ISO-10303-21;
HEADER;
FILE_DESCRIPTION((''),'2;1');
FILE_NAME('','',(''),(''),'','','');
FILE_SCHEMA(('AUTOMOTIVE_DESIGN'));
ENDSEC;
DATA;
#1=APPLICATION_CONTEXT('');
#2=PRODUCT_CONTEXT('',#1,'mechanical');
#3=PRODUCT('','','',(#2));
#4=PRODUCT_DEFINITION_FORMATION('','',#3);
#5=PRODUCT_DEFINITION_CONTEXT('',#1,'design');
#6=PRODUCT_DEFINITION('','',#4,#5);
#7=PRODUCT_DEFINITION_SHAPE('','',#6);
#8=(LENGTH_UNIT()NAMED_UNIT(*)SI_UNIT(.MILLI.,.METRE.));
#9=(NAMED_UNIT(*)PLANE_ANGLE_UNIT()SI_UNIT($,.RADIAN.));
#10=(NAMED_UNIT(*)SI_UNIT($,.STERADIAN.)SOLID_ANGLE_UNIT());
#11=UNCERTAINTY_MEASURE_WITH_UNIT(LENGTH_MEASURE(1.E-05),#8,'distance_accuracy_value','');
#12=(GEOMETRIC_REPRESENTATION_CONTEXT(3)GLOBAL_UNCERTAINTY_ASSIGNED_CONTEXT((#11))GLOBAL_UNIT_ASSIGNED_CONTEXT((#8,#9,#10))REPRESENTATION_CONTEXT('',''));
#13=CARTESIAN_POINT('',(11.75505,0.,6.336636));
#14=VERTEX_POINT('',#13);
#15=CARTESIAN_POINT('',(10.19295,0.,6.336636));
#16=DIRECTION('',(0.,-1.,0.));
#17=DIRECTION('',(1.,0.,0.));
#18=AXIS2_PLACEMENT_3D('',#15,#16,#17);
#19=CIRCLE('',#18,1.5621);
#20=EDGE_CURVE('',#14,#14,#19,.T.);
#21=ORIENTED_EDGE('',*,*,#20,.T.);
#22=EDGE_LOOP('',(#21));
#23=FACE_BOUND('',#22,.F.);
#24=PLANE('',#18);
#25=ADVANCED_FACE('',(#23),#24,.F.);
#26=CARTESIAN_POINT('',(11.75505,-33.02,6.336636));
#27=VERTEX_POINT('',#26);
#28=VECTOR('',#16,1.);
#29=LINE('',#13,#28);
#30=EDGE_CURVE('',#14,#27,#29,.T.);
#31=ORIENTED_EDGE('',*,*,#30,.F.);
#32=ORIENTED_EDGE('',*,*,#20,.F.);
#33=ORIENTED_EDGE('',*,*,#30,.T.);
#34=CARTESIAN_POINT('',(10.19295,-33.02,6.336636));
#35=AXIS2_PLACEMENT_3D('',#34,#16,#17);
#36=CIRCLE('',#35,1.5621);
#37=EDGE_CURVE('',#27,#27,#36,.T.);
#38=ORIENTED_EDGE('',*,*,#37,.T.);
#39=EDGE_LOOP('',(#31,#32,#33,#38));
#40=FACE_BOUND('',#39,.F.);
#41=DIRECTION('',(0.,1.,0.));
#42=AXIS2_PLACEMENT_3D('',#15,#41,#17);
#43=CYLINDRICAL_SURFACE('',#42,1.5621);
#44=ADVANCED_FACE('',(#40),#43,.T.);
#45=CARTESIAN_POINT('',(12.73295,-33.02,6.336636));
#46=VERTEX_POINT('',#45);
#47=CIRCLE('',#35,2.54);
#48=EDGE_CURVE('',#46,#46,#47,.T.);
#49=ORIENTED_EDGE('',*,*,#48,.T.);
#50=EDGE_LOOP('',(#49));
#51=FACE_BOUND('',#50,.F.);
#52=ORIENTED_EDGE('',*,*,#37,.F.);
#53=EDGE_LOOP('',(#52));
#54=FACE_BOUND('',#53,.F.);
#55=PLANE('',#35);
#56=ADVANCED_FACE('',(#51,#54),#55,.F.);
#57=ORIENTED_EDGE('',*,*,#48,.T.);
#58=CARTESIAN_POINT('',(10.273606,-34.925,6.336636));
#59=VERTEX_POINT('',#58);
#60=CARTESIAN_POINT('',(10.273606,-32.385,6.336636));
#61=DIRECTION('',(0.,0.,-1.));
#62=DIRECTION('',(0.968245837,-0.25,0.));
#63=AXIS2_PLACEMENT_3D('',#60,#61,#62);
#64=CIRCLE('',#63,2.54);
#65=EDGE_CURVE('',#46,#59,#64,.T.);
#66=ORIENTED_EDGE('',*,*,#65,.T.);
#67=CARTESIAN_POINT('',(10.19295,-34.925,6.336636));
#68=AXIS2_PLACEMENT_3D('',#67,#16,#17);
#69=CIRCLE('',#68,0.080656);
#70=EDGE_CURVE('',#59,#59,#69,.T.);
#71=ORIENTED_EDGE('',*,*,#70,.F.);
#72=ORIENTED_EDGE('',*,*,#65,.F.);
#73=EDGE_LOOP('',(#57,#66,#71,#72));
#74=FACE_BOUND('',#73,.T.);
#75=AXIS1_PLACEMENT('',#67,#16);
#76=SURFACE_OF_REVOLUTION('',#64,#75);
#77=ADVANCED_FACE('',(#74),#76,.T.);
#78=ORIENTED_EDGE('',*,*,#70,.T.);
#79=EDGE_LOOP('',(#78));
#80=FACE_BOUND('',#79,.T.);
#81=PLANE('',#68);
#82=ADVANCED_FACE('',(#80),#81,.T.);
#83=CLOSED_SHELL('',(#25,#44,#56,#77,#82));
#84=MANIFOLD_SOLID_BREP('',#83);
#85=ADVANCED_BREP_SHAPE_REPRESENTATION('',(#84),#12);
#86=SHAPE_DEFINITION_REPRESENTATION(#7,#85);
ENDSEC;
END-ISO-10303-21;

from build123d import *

# Parameters (mm, degrees)
F0_R     = 1.5621
F1_DEPTH = 33.02
F2_R     = 2.54
F3_DEPTH = 1.905


# Not quite as in the source:
# - a fillet or chamfer that OpenCascade refuses, or shapes differently, is made with other operations: its cross-section is extruded or revolved along the edge and cut away or added


with BuildPart() as f1:
    # F0 (on Front) → F1 (new body)
    with BuildSketch(Plane.XZ):
        with Locations((10.1929502562, 6.33663591)):
            Circle(F0_R)
    extrude(amount=F1_DEPTH)

    # F2 (on face) → F3 (join)
    with BuildSketch(Plane.XZ.offset(33.02)):
        with Locations((10.1929502562, 6.33663591)):
            Circle(F2_R)
    extrude(amount=F3_DEPTH)

    # F4: fillet of radius 2.54 on 1 edges, made by hand

    # F4_s1 → F4_t2 (revolve, cut)
    with BuildSketch(Plane.XY.offset(6.33663591)):
        with BuildLine():
            ThreePointArc((12.7329502562, -33.02), (11.829031818, -34.3930463142), (10.2736058313, -34.925))
            Line((10.2736058313, -34.925), (12.7329502562, -34.925))
            Line((12.7329502562, -34.925), (12.7329502562, -33.02))
        make_face()
    revolve(axis=Axis((10.1929502562, -34.925, 6.33663591), (0, -1, 0)), mode=Mode.SUBTRACT)


solid = f1.part
